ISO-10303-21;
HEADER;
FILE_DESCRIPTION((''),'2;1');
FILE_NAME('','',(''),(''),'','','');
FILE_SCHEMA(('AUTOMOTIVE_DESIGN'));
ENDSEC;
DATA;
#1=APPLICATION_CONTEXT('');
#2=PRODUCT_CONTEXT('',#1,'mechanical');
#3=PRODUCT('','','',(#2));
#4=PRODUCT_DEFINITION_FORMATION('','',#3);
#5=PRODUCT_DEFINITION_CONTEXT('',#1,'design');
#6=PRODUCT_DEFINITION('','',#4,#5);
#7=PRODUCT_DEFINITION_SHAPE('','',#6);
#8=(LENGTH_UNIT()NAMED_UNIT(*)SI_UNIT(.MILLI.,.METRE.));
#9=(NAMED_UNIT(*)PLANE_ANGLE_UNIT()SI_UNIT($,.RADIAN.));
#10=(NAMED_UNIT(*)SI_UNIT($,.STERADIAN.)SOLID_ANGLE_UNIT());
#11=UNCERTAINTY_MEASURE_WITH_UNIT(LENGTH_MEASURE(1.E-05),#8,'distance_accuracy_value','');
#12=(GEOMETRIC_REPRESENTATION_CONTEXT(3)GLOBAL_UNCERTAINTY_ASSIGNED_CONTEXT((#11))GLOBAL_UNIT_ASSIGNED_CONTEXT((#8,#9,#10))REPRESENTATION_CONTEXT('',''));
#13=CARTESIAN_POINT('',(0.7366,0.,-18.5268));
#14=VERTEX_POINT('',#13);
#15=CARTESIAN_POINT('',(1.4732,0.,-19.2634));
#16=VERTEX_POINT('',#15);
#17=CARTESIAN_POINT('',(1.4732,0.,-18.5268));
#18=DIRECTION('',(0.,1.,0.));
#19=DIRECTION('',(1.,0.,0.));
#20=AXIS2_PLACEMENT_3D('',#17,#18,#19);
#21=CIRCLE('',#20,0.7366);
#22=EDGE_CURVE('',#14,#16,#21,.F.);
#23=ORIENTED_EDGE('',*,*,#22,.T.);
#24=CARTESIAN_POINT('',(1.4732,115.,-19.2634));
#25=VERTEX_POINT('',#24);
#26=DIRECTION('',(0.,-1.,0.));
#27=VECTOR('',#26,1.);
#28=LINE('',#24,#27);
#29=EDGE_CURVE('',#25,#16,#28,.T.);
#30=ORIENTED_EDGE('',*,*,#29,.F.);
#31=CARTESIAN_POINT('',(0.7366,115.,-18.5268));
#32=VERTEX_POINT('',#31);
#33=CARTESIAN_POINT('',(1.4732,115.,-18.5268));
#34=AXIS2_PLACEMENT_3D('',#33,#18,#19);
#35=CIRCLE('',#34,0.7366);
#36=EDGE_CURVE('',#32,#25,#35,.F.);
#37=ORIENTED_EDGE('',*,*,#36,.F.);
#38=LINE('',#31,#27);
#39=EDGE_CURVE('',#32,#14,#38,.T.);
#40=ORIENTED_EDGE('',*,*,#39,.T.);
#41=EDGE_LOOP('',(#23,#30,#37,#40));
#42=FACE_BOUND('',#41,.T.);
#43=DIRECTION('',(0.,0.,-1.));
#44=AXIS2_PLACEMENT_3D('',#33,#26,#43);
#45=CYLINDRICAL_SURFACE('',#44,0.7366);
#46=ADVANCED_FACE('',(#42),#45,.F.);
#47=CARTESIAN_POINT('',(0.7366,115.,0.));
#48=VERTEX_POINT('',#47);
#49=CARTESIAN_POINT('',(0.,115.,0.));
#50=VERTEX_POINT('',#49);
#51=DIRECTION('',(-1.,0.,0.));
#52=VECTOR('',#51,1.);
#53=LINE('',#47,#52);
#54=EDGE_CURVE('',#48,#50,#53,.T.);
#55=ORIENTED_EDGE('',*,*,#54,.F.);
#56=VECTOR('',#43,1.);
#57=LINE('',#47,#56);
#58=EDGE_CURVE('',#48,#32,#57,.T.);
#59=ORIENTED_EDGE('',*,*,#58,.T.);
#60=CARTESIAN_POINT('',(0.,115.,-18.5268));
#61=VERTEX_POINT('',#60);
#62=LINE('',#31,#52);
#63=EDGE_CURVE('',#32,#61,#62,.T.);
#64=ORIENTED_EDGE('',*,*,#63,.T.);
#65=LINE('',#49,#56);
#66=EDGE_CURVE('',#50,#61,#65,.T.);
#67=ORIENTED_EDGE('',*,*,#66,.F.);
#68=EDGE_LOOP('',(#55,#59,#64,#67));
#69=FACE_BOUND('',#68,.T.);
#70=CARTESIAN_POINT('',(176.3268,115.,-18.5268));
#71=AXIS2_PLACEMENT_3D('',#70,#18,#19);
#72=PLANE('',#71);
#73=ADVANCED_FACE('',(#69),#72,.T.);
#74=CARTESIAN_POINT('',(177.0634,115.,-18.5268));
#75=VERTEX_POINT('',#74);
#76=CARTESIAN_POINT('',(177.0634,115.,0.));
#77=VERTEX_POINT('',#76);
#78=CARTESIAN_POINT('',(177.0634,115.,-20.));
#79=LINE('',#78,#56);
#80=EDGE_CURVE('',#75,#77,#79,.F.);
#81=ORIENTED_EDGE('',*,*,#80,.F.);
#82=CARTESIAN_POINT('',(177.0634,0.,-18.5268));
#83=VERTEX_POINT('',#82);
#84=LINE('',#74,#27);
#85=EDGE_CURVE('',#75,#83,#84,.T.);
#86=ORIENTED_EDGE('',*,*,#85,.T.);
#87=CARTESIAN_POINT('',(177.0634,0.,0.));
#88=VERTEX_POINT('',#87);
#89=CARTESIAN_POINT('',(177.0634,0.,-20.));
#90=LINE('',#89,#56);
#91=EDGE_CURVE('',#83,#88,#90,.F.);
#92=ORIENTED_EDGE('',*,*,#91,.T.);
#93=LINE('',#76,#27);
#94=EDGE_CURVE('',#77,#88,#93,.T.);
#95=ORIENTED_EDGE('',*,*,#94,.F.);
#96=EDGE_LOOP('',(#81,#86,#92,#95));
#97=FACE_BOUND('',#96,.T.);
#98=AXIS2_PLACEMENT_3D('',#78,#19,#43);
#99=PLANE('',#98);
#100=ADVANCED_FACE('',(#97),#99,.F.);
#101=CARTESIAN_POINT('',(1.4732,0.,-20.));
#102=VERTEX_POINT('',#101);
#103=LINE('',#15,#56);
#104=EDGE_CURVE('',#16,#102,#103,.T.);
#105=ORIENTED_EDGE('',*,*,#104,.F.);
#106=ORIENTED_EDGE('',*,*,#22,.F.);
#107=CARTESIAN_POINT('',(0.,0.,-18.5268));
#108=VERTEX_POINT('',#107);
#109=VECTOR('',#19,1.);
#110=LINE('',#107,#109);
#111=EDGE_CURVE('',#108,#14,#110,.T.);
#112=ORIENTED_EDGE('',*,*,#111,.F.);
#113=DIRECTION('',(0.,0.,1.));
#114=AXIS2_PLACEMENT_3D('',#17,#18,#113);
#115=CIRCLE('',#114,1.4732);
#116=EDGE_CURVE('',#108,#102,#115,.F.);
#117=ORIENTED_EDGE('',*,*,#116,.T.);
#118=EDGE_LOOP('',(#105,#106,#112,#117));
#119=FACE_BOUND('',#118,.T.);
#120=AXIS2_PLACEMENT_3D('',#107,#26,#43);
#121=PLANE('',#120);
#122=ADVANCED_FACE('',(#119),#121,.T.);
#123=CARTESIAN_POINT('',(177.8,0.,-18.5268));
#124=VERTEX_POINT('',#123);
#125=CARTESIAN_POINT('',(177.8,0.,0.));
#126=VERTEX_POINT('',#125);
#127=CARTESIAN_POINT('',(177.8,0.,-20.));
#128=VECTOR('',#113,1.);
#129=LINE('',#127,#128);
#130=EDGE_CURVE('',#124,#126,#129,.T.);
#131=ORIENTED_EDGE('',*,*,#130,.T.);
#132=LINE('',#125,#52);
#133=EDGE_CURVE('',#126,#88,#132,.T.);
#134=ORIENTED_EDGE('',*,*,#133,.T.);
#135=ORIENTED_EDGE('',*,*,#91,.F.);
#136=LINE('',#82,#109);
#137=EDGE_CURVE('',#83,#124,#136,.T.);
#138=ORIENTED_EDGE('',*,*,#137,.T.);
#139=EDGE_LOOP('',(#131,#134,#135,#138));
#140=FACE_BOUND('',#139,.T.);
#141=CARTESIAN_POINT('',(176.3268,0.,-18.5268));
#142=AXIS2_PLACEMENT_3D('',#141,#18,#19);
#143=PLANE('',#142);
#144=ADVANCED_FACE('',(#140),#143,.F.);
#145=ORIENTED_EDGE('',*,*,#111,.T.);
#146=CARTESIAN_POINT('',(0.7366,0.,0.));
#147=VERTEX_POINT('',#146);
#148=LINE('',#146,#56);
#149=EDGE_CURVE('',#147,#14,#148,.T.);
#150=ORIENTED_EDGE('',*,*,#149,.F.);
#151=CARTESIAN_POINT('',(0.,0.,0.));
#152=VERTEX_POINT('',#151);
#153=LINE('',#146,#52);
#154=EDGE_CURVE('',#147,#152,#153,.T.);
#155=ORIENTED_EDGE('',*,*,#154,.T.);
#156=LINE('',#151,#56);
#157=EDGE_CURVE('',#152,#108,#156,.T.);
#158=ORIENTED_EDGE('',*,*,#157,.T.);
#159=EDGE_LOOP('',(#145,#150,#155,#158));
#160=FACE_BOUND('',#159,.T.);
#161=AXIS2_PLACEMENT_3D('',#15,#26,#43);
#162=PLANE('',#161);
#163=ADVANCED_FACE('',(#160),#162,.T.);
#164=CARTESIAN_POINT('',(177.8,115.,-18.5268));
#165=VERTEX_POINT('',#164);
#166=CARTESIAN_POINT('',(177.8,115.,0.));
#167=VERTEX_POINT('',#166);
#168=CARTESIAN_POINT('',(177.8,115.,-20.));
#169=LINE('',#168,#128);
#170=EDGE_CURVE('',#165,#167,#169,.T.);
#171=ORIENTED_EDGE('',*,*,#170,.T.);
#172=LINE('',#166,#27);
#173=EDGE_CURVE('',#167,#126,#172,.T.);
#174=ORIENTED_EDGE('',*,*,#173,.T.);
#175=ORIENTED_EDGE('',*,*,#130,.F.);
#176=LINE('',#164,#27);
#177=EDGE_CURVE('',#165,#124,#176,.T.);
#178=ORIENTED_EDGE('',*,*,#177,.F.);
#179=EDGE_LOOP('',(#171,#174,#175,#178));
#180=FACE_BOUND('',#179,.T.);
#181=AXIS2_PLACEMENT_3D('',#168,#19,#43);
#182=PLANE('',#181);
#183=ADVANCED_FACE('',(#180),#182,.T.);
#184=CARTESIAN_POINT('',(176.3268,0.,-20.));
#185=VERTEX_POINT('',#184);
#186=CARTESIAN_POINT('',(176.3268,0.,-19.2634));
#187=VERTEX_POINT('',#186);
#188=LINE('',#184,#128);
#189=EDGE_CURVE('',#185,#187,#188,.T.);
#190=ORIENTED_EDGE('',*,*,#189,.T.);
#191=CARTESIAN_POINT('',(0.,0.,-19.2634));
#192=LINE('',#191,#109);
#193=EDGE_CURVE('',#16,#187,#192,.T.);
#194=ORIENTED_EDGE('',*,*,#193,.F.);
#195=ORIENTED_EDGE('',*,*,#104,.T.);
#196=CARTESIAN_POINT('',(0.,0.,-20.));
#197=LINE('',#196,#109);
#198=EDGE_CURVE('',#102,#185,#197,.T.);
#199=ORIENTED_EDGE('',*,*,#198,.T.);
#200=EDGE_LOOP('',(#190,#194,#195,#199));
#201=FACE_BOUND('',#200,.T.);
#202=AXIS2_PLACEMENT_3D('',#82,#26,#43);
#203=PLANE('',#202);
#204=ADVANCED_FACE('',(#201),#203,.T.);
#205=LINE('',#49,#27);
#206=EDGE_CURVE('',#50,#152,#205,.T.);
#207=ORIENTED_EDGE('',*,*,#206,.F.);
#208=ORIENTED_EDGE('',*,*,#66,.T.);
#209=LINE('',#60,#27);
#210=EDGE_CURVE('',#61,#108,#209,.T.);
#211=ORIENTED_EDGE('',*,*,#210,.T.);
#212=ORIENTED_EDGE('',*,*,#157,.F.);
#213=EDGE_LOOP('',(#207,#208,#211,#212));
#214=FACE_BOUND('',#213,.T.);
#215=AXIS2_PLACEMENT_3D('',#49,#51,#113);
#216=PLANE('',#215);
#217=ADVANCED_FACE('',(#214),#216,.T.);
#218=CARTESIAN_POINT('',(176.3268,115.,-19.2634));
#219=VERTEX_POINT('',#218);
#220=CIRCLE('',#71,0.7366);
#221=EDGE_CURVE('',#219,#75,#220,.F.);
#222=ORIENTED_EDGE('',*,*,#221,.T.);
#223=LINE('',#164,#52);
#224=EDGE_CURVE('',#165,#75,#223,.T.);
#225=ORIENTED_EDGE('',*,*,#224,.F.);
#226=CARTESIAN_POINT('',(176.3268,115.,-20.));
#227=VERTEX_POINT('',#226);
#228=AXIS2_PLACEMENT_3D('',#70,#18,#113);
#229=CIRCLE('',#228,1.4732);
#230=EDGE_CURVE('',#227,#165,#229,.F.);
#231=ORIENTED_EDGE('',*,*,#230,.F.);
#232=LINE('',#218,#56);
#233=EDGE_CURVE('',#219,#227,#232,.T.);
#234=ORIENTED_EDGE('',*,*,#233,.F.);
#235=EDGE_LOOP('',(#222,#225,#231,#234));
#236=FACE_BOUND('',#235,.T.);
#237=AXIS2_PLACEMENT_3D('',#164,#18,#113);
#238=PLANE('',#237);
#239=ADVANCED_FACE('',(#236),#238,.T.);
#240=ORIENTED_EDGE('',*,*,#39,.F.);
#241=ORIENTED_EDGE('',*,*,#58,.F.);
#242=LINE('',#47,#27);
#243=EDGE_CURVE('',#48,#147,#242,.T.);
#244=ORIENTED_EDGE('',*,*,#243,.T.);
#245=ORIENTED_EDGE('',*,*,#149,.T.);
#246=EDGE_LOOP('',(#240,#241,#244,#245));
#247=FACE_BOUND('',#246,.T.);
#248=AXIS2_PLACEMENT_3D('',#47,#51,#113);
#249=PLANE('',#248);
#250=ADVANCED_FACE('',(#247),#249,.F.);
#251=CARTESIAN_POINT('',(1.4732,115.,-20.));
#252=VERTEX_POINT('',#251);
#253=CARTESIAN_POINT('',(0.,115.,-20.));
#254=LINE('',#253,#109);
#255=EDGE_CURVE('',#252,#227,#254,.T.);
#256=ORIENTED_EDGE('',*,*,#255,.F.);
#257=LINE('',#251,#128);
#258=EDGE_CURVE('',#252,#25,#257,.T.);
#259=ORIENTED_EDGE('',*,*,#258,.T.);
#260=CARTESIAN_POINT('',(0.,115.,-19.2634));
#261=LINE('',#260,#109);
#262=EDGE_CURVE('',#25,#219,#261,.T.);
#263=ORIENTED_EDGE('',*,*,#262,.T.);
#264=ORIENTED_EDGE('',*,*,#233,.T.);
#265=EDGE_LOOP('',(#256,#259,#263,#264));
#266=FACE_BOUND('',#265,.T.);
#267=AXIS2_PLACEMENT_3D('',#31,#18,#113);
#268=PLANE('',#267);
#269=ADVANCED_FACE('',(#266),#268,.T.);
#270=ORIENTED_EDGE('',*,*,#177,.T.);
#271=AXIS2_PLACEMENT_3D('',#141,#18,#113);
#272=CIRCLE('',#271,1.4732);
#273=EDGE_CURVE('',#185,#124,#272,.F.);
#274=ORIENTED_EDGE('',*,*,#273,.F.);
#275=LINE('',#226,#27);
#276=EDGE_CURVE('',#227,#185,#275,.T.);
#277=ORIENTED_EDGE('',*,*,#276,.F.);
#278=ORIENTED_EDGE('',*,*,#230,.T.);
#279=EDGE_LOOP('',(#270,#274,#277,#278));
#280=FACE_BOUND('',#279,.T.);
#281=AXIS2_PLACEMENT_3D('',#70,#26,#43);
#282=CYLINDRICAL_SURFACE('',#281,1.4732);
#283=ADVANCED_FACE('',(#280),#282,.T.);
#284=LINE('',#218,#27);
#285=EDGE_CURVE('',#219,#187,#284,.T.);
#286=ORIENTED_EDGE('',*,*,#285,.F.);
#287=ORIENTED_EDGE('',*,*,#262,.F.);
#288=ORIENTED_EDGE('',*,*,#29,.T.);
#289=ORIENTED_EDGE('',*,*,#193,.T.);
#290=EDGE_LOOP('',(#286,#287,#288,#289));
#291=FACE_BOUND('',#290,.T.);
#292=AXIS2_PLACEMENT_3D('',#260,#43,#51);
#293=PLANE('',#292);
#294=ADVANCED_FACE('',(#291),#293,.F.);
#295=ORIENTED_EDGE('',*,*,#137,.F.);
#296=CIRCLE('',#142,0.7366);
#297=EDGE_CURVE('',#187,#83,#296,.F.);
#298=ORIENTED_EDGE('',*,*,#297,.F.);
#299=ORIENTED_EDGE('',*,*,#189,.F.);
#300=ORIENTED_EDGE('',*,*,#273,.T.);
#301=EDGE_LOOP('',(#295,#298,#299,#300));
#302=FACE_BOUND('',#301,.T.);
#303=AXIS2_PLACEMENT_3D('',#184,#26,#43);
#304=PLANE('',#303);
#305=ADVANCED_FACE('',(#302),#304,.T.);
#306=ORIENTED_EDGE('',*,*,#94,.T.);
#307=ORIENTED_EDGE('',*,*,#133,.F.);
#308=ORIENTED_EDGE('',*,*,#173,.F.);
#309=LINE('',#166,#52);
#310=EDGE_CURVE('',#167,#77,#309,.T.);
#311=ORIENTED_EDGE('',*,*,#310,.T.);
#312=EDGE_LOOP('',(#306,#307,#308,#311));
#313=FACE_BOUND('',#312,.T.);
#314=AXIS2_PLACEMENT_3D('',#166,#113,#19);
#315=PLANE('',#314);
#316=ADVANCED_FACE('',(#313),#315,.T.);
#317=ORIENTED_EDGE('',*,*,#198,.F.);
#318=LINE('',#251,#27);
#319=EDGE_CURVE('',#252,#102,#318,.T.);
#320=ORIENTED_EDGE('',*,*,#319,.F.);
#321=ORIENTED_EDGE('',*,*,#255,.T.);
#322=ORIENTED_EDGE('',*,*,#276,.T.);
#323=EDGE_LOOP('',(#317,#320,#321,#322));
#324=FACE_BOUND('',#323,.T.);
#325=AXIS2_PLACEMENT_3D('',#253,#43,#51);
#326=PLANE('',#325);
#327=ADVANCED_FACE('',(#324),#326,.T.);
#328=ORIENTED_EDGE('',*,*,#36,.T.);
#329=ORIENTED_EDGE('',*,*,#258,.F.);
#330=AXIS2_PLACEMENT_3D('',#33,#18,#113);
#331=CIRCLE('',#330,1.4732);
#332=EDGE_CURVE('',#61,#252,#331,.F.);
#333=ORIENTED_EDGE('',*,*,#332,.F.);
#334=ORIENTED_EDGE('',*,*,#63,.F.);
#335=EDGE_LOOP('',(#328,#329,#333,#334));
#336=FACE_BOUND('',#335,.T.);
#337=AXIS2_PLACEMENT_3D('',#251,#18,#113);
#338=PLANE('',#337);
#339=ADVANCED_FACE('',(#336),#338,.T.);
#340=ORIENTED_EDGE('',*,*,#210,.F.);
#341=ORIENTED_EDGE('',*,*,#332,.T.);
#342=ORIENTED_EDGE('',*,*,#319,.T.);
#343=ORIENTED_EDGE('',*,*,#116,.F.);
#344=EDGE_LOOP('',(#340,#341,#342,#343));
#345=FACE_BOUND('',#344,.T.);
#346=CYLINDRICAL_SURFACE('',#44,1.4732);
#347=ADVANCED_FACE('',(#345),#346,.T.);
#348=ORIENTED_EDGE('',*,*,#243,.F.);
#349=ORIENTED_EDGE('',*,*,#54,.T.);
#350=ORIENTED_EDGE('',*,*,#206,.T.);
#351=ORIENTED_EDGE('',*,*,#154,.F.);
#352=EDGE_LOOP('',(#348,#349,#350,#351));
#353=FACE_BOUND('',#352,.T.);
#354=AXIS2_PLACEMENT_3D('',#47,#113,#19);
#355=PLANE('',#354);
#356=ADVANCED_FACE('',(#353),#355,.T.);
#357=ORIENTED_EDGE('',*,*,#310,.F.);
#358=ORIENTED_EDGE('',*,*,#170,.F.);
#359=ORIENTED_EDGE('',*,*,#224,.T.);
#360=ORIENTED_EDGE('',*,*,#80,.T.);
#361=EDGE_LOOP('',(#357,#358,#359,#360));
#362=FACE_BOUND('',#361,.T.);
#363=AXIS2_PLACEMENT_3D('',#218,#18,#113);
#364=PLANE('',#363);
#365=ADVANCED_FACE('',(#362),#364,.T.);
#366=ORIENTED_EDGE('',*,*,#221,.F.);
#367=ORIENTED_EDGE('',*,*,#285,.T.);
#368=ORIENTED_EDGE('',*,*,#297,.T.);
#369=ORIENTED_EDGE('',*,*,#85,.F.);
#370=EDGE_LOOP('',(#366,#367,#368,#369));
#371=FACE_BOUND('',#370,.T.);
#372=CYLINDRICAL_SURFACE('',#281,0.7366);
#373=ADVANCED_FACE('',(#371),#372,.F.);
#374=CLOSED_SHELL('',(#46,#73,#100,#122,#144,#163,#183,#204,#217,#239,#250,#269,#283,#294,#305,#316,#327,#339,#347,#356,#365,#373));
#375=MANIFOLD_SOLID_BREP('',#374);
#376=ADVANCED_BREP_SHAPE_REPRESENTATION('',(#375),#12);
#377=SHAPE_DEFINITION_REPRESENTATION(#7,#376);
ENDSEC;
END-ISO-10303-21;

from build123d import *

# Parameters (mm, degrees)
BASE_FLANGE1_DEPTH = 115


# Sheet-metal steps are written as plain solids
with BuildPart() as part:
    # Sketch1 → Base-Flange1 (new body)
    with BuildSketch(Plane(origin=(0, 0, 0), x_dir=(1, 0, 0), z_dir=(0, 1, 0))):
        with BuildLine():
            Line((0, 0), (0, 18.5268))
            ThreePointArc((0, 18.5268), (0.43149029, 19.56850971), (1.4732, 20))
            Line((1.4732, 20), (176.3268, 20))
            ThreePointArc((176.3268, 20), (177.36850971, 19.56850971), (177.8, 18.5268))
            Line((177.8, 18.5268), (177.8, 0))
            Line((177.8, 0), (177.0634, 0))
            Line((177.0634, 0), (177.0634, 18.5268))
            ThreePointArc((177.0634, 18.5268), (176.847654855, 19.047654855), (176.3268, 19.2634))
            Line((176.3268, 19.2634), (1.4732, 19.2634))
            ThreePointArc((1.4732, 19.2634), (0.952345145, 19.047654855), (0.7366, 18.5268))
            Line((0.7366, 18.5268), (0.7366, 0))
            Line((0.7366, 0), (0, 0))
        make_face()
    extrude(amount=BASE_FLANGE1_DEPTH)


solid = part.part
